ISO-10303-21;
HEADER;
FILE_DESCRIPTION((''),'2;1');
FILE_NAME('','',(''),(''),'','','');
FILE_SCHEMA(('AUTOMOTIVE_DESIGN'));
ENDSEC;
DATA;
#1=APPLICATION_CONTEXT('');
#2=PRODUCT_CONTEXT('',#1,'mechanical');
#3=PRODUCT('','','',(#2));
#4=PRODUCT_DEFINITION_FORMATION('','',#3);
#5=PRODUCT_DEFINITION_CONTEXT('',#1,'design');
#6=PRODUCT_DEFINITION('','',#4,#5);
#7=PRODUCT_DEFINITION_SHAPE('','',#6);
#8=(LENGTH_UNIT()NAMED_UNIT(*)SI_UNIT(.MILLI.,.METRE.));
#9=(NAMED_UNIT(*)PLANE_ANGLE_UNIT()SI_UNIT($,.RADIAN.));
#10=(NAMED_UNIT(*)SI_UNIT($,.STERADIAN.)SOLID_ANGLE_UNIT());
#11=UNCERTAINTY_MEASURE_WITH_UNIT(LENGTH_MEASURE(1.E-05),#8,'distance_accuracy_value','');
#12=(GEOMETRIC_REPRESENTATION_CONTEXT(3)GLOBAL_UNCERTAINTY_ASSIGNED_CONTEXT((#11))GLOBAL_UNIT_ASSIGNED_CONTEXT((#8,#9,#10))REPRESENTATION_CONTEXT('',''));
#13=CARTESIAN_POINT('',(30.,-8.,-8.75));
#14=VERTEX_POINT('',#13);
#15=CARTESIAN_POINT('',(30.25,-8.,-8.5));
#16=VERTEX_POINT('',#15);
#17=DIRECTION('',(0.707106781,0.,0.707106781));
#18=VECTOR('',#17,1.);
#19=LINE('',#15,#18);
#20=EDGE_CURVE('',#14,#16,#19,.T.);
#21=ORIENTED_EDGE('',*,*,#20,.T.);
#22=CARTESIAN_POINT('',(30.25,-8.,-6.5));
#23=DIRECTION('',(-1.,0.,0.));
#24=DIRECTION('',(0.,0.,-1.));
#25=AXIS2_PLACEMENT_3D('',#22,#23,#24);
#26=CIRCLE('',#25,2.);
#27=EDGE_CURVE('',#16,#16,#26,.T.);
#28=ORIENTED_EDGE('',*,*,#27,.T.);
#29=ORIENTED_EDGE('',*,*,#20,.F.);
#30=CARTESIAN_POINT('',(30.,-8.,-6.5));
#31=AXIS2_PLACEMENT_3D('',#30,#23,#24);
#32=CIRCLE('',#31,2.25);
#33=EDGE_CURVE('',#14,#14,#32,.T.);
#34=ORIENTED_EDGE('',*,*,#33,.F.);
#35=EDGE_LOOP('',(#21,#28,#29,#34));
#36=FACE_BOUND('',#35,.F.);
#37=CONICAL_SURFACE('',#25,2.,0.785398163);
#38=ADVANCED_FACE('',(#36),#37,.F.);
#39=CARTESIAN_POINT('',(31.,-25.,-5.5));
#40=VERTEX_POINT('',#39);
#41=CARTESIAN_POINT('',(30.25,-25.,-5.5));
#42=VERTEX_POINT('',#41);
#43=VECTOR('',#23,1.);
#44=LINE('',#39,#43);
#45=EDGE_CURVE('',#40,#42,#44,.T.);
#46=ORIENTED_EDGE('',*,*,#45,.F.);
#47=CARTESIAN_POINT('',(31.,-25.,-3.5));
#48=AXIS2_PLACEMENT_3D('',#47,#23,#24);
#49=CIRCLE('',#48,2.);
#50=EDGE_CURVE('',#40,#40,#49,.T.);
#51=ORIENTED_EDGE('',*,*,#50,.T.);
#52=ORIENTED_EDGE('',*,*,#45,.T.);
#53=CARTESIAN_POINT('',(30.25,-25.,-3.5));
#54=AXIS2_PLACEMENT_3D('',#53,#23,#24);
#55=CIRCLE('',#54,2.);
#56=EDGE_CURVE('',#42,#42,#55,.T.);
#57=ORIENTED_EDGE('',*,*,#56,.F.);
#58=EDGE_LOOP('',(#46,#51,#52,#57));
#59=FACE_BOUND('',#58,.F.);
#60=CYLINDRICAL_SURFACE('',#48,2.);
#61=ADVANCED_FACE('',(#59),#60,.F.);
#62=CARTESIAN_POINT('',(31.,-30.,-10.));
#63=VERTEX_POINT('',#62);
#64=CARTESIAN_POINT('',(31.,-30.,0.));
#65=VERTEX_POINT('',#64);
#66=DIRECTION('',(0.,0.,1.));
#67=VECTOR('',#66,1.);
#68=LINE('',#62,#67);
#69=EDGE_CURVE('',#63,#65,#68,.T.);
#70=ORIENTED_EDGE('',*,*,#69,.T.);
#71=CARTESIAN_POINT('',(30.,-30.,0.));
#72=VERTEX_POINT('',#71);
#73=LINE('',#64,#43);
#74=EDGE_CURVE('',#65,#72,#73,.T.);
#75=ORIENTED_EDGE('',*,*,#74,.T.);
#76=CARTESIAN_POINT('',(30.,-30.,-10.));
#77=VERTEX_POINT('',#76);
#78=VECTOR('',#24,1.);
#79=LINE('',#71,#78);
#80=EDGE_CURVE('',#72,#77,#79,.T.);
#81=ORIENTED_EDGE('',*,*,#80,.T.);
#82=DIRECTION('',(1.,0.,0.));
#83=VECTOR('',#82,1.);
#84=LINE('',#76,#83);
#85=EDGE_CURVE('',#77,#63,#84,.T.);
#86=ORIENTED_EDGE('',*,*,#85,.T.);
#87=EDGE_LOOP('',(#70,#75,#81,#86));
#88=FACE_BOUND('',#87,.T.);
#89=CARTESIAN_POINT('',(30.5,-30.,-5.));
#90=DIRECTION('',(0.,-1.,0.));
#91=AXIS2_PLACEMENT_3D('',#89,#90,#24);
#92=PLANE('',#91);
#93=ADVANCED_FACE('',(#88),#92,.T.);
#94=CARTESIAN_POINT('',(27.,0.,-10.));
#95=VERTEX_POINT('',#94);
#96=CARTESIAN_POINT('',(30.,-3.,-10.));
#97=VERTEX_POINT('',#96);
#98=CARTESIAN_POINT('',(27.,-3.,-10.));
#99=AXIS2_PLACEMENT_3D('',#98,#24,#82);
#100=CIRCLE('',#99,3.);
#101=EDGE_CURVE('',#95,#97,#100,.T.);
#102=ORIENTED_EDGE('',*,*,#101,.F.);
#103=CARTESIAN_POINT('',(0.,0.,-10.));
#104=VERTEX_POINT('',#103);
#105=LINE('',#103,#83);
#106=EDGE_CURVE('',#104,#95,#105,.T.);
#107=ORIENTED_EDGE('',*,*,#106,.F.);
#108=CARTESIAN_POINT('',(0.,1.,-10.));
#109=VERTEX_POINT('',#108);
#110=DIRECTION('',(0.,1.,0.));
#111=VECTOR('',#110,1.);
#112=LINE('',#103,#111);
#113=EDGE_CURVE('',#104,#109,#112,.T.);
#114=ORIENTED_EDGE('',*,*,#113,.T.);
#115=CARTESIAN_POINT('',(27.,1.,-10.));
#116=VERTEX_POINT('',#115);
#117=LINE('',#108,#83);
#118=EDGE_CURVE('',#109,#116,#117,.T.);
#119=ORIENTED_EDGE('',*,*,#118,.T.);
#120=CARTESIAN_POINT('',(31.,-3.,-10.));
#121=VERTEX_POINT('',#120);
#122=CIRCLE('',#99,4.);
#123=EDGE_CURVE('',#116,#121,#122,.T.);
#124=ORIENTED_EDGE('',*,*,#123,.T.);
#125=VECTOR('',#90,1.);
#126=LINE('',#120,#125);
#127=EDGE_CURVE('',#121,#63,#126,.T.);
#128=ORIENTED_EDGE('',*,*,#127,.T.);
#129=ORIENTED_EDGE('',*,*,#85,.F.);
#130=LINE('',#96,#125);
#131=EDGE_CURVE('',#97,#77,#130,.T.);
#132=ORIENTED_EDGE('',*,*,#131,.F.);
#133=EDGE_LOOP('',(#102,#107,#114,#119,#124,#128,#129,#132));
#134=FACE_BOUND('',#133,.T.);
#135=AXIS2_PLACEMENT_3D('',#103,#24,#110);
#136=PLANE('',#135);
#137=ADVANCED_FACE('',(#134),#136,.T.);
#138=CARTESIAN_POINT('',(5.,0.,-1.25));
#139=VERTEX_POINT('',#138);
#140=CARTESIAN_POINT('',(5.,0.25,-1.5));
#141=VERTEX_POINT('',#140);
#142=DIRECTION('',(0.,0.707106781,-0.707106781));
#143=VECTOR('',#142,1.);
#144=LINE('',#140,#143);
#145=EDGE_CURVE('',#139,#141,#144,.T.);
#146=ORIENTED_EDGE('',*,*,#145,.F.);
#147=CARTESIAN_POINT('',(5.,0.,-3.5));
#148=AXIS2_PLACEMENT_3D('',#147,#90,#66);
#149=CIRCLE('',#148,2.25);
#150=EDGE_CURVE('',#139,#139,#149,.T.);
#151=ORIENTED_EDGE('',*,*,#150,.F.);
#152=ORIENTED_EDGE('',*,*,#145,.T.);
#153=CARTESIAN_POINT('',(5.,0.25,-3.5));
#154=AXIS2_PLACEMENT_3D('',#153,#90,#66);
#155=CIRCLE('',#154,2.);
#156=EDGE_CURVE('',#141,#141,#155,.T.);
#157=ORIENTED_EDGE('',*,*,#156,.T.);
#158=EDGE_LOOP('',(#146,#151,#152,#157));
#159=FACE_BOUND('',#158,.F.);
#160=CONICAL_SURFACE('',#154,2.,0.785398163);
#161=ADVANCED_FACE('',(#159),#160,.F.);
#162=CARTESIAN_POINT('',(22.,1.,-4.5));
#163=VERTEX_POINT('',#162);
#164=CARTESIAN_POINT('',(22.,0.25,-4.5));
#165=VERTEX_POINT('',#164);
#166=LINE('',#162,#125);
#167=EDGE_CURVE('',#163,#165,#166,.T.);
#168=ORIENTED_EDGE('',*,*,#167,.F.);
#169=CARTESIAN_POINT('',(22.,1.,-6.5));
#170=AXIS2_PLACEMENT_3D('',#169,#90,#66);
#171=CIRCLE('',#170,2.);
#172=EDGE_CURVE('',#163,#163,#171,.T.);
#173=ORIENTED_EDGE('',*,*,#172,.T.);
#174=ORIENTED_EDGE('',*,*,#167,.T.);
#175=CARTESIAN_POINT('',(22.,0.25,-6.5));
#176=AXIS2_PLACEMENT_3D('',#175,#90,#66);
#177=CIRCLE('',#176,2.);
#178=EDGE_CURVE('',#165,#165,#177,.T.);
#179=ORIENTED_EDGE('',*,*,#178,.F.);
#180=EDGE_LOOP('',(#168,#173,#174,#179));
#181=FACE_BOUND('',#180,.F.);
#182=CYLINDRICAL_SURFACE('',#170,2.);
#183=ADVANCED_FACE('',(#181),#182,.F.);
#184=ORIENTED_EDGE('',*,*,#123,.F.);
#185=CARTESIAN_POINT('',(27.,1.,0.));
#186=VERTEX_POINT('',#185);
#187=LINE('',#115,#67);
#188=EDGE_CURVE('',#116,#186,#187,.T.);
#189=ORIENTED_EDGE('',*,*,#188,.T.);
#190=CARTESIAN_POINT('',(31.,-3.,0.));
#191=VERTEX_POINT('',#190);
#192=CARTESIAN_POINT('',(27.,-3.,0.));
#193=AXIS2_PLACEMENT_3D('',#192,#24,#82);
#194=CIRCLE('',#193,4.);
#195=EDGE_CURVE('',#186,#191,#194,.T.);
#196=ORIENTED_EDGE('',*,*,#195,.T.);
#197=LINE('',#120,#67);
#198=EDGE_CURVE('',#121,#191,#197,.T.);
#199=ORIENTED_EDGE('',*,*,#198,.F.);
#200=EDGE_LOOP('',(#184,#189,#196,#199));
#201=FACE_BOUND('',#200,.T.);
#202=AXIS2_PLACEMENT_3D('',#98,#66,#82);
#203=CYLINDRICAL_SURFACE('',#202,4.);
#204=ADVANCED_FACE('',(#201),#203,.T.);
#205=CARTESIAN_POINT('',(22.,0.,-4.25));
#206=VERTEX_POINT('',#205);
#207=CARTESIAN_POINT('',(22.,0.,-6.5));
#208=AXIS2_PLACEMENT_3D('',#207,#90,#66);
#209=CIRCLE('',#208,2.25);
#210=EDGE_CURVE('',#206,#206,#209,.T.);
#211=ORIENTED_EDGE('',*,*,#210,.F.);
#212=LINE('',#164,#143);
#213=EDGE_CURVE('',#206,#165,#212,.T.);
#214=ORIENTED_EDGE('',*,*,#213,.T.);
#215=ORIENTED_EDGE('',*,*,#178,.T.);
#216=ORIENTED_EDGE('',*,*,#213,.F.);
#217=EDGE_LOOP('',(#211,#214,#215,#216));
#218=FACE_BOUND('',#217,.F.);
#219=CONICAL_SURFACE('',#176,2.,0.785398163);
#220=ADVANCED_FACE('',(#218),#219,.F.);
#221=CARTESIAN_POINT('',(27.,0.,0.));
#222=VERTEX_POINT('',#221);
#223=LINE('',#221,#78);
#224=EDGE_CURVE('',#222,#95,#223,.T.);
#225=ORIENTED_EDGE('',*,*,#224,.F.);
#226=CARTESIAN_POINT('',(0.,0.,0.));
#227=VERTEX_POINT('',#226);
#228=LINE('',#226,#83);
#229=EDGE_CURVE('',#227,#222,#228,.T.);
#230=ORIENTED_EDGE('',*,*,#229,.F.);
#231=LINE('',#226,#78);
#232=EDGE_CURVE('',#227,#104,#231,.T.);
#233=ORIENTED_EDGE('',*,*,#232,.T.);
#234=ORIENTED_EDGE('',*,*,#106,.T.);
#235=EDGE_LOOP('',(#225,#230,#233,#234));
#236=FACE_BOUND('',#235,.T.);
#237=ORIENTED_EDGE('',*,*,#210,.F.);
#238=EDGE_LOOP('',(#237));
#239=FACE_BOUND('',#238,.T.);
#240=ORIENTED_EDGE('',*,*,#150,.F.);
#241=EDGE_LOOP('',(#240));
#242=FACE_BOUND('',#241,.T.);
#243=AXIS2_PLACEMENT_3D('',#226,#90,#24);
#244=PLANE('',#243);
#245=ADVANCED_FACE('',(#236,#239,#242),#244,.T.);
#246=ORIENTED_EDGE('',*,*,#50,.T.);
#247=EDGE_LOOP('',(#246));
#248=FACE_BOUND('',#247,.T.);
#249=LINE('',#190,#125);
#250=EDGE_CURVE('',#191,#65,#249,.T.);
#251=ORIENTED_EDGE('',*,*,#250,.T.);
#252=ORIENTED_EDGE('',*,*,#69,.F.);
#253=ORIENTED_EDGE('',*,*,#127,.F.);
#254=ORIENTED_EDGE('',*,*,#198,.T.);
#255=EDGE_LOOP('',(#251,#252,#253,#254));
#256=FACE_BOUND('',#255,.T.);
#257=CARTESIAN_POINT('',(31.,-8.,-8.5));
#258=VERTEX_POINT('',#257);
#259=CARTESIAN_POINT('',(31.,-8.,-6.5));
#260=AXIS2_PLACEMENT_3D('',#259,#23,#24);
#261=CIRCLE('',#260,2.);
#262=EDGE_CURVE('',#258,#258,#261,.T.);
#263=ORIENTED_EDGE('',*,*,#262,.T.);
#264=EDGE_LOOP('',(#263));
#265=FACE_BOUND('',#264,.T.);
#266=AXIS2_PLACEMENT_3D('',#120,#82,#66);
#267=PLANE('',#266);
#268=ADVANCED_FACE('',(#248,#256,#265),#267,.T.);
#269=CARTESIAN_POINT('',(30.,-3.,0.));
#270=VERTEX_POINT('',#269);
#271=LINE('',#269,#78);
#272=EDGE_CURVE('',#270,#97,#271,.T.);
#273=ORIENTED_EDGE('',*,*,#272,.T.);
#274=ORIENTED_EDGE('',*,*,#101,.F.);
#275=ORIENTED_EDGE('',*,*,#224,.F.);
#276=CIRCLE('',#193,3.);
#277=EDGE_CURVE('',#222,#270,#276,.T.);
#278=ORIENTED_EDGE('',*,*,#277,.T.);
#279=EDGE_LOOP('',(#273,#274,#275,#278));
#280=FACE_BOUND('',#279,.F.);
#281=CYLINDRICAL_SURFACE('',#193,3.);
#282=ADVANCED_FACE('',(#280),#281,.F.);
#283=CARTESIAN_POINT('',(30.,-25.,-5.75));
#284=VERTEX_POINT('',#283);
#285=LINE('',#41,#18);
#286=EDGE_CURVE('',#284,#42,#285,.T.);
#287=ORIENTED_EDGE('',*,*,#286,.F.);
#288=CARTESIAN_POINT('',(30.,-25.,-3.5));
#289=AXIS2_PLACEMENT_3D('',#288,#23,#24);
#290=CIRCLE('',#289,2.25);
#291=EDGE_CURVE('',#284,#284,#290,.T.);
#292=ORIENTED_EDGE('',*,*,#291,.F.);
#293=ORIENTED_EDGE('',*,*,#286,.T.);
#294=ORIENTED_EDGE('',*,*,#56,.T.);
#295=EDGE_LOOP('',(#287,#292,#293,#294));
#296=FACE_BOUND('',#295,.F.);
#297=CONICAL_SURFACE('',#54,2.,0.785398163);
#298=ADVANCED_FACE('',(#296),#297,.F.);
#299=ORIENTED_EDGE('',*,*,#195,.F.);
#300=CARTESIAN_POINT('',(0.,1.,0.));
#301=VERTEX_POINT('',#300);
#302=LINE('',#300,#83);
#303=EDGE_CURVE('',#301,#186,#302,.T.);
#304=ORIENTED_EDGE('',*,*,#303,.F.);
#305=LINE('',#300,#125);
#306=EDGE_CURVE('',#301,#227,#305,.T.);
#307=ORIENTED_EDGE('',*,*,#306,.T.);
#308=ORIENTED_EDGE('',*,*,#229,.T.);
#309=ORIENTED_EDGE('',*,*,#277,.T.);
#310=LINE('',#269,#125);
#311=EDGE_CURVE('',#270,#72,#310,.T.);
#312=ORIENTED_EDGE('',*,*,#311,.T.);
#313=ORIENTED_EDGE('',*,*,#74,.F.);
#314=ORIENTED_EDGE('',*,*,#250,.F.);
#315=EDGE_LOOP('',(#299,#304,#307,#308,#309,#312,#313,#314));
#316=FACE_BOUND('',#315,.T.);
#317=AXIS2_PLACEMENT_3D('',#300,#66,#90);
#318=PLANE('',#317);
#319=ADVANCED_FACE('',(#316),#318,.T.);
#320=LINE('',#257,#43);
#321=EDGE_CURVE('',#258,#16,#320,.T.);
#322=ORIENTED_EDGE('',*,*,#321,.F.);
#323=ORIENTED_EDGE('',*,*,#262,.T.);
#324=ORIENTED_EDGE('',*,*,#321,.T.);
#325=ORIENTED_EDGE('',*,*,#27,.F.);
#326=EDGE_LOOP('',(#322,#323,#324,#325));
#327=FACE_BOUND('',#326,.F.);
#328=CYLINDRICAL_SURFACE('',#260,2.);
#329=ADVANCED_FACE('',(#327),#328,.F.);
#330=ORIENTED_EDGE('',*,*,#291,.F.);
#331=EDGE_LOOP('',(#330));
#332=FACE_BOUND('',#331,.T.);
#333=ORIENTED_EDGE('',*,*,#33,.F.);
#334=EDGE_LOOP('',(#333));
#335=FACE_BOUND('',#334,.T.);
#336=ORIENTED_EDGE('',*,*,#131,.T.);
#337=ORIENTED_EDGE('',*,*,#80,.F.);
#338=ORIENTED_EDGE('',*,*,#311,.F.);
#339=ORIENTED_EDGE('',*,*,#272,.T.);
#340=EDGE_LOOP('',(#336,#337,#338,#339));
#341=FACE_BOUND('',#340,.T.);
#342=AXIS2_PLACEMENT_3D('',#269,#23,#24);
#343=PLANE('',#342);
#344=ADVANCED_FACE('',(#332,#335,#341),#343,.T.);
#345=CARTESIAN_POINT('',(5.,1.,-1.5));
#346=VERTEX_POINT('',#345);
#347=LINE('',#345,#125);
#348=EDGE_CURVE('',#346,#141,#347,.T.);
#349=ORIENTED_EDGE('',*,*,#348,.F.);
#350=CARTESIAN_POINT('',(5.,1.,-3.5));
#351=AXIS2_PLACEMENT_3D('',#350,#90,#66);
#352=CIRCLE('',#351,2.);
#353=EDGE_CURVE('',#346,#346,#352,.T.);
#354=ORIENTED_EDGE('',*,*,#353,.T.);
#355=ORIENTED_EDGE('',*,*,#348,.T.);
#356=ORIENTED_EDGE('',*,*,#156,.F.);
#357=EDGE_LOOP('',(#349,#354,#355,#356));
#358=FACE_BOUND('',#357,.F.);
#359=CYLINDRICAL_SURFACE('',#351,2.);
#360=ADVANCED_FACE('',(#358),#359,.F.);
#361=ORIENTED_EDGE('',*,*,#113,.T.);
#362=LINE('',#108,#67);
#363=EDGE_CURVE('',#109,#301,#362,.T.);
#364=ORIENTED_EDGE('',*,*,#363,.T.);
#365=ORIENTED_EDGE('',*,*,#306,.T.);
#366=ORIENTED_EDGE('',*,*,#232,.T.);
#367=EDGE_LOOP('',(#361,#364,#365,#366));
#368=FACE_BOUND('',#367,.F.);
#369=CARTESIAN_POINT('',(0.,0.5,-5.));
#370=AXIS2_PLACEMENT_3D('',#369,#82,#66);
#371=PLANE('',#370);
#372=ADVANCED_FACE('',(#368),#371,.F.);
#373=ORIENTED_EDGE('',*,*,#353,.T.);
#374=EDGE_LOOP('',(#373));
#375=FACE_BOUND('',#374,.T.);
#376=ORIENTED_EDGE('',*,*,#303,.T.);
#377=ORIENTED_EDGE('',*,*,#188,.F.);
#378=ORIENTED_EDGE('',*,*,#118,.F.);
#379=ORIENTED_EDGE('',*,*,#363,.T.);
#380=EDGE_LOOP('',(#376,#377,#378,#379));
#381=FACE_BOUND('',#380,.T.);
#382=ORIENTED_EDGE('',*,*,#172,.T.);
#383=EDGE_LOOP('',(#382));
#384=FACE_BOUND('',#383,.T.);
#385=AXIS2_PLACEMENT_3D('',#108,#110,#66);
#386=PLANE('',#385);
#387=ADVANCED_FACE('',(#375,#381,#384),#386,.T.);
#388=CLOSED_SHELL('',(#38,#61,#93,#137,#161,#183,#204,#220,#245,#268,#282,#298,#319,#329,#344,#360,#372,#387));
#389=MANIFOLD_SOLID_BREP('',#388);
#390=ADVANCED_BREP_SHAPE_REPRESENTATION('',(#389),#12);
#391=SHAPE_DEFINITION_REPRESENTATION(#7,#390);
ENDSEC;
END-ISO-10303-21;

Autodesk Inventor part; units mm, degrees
ref_plane "YZ Plane" through (0, 0, 0) normal (1, 0, 0) x (0, 1, 0)
ref_plane "XZ Plane" through (0, 0, 0) normal (0, 1, 0) x (-1, 0, 0)
ref_plane "XY Plane" through (0, 0, 0) normal (0, 0, 1) x (1, 0, 0)
sketch "Sketch1" plane through (0, 0, 0) normal (0, 0, 1) x (1, 0, 0)
  line L0 (0, 0) -> (27, 0)
  line L1 (30, -3) -> (30, -30)
  arc A0 (30, -3) -> (27, 0) centre (27, -3) ccw
  point P0 (30, 0)
  dimension "d0" = 30
  dimension "d1" = 30
  dimension "d7" = 3
sketch "Sketch2" plane through (0, 0, 0) normal (1, 0, 0) x (0, 1, 0)
  line L0 (0, 0) -> (0, -10)
  line L1 (0, -10) -> (1, -10)
  line L2 (1, -10) -> (1, 0)
  line L3 (1, 0) -> (0, 0)
  dimension "d2" = 10
  dimension "d3" = 1
  dimension "d4" = 10
sweep "Sweep1" add profiles "Sketch2" path "Sketch1"
hole "Hole1" at (5, 1, -3.5) direction (0, -1, 0) diameter 4 end through all
hole "Hole2" at (22, 1, -6.5) direction (0, -1, 0) diameter 4 end through all
hole "Hole3" at (31, -8, -6.5) direction (-1, 0, 0) diameter 4 end through all
hole "Hole4" at (31, -25, -3.5) direction (-1, 0, 0) diameter 4 end through all
chamfer "Chamfer1" distance 0.25 angle 45 4 edges at (5, 0, -5.5) (22, 0, -8.5) (30, -8, -4.5) (30, -25, -1.5)
properties part number "30mmCornerBracket"
